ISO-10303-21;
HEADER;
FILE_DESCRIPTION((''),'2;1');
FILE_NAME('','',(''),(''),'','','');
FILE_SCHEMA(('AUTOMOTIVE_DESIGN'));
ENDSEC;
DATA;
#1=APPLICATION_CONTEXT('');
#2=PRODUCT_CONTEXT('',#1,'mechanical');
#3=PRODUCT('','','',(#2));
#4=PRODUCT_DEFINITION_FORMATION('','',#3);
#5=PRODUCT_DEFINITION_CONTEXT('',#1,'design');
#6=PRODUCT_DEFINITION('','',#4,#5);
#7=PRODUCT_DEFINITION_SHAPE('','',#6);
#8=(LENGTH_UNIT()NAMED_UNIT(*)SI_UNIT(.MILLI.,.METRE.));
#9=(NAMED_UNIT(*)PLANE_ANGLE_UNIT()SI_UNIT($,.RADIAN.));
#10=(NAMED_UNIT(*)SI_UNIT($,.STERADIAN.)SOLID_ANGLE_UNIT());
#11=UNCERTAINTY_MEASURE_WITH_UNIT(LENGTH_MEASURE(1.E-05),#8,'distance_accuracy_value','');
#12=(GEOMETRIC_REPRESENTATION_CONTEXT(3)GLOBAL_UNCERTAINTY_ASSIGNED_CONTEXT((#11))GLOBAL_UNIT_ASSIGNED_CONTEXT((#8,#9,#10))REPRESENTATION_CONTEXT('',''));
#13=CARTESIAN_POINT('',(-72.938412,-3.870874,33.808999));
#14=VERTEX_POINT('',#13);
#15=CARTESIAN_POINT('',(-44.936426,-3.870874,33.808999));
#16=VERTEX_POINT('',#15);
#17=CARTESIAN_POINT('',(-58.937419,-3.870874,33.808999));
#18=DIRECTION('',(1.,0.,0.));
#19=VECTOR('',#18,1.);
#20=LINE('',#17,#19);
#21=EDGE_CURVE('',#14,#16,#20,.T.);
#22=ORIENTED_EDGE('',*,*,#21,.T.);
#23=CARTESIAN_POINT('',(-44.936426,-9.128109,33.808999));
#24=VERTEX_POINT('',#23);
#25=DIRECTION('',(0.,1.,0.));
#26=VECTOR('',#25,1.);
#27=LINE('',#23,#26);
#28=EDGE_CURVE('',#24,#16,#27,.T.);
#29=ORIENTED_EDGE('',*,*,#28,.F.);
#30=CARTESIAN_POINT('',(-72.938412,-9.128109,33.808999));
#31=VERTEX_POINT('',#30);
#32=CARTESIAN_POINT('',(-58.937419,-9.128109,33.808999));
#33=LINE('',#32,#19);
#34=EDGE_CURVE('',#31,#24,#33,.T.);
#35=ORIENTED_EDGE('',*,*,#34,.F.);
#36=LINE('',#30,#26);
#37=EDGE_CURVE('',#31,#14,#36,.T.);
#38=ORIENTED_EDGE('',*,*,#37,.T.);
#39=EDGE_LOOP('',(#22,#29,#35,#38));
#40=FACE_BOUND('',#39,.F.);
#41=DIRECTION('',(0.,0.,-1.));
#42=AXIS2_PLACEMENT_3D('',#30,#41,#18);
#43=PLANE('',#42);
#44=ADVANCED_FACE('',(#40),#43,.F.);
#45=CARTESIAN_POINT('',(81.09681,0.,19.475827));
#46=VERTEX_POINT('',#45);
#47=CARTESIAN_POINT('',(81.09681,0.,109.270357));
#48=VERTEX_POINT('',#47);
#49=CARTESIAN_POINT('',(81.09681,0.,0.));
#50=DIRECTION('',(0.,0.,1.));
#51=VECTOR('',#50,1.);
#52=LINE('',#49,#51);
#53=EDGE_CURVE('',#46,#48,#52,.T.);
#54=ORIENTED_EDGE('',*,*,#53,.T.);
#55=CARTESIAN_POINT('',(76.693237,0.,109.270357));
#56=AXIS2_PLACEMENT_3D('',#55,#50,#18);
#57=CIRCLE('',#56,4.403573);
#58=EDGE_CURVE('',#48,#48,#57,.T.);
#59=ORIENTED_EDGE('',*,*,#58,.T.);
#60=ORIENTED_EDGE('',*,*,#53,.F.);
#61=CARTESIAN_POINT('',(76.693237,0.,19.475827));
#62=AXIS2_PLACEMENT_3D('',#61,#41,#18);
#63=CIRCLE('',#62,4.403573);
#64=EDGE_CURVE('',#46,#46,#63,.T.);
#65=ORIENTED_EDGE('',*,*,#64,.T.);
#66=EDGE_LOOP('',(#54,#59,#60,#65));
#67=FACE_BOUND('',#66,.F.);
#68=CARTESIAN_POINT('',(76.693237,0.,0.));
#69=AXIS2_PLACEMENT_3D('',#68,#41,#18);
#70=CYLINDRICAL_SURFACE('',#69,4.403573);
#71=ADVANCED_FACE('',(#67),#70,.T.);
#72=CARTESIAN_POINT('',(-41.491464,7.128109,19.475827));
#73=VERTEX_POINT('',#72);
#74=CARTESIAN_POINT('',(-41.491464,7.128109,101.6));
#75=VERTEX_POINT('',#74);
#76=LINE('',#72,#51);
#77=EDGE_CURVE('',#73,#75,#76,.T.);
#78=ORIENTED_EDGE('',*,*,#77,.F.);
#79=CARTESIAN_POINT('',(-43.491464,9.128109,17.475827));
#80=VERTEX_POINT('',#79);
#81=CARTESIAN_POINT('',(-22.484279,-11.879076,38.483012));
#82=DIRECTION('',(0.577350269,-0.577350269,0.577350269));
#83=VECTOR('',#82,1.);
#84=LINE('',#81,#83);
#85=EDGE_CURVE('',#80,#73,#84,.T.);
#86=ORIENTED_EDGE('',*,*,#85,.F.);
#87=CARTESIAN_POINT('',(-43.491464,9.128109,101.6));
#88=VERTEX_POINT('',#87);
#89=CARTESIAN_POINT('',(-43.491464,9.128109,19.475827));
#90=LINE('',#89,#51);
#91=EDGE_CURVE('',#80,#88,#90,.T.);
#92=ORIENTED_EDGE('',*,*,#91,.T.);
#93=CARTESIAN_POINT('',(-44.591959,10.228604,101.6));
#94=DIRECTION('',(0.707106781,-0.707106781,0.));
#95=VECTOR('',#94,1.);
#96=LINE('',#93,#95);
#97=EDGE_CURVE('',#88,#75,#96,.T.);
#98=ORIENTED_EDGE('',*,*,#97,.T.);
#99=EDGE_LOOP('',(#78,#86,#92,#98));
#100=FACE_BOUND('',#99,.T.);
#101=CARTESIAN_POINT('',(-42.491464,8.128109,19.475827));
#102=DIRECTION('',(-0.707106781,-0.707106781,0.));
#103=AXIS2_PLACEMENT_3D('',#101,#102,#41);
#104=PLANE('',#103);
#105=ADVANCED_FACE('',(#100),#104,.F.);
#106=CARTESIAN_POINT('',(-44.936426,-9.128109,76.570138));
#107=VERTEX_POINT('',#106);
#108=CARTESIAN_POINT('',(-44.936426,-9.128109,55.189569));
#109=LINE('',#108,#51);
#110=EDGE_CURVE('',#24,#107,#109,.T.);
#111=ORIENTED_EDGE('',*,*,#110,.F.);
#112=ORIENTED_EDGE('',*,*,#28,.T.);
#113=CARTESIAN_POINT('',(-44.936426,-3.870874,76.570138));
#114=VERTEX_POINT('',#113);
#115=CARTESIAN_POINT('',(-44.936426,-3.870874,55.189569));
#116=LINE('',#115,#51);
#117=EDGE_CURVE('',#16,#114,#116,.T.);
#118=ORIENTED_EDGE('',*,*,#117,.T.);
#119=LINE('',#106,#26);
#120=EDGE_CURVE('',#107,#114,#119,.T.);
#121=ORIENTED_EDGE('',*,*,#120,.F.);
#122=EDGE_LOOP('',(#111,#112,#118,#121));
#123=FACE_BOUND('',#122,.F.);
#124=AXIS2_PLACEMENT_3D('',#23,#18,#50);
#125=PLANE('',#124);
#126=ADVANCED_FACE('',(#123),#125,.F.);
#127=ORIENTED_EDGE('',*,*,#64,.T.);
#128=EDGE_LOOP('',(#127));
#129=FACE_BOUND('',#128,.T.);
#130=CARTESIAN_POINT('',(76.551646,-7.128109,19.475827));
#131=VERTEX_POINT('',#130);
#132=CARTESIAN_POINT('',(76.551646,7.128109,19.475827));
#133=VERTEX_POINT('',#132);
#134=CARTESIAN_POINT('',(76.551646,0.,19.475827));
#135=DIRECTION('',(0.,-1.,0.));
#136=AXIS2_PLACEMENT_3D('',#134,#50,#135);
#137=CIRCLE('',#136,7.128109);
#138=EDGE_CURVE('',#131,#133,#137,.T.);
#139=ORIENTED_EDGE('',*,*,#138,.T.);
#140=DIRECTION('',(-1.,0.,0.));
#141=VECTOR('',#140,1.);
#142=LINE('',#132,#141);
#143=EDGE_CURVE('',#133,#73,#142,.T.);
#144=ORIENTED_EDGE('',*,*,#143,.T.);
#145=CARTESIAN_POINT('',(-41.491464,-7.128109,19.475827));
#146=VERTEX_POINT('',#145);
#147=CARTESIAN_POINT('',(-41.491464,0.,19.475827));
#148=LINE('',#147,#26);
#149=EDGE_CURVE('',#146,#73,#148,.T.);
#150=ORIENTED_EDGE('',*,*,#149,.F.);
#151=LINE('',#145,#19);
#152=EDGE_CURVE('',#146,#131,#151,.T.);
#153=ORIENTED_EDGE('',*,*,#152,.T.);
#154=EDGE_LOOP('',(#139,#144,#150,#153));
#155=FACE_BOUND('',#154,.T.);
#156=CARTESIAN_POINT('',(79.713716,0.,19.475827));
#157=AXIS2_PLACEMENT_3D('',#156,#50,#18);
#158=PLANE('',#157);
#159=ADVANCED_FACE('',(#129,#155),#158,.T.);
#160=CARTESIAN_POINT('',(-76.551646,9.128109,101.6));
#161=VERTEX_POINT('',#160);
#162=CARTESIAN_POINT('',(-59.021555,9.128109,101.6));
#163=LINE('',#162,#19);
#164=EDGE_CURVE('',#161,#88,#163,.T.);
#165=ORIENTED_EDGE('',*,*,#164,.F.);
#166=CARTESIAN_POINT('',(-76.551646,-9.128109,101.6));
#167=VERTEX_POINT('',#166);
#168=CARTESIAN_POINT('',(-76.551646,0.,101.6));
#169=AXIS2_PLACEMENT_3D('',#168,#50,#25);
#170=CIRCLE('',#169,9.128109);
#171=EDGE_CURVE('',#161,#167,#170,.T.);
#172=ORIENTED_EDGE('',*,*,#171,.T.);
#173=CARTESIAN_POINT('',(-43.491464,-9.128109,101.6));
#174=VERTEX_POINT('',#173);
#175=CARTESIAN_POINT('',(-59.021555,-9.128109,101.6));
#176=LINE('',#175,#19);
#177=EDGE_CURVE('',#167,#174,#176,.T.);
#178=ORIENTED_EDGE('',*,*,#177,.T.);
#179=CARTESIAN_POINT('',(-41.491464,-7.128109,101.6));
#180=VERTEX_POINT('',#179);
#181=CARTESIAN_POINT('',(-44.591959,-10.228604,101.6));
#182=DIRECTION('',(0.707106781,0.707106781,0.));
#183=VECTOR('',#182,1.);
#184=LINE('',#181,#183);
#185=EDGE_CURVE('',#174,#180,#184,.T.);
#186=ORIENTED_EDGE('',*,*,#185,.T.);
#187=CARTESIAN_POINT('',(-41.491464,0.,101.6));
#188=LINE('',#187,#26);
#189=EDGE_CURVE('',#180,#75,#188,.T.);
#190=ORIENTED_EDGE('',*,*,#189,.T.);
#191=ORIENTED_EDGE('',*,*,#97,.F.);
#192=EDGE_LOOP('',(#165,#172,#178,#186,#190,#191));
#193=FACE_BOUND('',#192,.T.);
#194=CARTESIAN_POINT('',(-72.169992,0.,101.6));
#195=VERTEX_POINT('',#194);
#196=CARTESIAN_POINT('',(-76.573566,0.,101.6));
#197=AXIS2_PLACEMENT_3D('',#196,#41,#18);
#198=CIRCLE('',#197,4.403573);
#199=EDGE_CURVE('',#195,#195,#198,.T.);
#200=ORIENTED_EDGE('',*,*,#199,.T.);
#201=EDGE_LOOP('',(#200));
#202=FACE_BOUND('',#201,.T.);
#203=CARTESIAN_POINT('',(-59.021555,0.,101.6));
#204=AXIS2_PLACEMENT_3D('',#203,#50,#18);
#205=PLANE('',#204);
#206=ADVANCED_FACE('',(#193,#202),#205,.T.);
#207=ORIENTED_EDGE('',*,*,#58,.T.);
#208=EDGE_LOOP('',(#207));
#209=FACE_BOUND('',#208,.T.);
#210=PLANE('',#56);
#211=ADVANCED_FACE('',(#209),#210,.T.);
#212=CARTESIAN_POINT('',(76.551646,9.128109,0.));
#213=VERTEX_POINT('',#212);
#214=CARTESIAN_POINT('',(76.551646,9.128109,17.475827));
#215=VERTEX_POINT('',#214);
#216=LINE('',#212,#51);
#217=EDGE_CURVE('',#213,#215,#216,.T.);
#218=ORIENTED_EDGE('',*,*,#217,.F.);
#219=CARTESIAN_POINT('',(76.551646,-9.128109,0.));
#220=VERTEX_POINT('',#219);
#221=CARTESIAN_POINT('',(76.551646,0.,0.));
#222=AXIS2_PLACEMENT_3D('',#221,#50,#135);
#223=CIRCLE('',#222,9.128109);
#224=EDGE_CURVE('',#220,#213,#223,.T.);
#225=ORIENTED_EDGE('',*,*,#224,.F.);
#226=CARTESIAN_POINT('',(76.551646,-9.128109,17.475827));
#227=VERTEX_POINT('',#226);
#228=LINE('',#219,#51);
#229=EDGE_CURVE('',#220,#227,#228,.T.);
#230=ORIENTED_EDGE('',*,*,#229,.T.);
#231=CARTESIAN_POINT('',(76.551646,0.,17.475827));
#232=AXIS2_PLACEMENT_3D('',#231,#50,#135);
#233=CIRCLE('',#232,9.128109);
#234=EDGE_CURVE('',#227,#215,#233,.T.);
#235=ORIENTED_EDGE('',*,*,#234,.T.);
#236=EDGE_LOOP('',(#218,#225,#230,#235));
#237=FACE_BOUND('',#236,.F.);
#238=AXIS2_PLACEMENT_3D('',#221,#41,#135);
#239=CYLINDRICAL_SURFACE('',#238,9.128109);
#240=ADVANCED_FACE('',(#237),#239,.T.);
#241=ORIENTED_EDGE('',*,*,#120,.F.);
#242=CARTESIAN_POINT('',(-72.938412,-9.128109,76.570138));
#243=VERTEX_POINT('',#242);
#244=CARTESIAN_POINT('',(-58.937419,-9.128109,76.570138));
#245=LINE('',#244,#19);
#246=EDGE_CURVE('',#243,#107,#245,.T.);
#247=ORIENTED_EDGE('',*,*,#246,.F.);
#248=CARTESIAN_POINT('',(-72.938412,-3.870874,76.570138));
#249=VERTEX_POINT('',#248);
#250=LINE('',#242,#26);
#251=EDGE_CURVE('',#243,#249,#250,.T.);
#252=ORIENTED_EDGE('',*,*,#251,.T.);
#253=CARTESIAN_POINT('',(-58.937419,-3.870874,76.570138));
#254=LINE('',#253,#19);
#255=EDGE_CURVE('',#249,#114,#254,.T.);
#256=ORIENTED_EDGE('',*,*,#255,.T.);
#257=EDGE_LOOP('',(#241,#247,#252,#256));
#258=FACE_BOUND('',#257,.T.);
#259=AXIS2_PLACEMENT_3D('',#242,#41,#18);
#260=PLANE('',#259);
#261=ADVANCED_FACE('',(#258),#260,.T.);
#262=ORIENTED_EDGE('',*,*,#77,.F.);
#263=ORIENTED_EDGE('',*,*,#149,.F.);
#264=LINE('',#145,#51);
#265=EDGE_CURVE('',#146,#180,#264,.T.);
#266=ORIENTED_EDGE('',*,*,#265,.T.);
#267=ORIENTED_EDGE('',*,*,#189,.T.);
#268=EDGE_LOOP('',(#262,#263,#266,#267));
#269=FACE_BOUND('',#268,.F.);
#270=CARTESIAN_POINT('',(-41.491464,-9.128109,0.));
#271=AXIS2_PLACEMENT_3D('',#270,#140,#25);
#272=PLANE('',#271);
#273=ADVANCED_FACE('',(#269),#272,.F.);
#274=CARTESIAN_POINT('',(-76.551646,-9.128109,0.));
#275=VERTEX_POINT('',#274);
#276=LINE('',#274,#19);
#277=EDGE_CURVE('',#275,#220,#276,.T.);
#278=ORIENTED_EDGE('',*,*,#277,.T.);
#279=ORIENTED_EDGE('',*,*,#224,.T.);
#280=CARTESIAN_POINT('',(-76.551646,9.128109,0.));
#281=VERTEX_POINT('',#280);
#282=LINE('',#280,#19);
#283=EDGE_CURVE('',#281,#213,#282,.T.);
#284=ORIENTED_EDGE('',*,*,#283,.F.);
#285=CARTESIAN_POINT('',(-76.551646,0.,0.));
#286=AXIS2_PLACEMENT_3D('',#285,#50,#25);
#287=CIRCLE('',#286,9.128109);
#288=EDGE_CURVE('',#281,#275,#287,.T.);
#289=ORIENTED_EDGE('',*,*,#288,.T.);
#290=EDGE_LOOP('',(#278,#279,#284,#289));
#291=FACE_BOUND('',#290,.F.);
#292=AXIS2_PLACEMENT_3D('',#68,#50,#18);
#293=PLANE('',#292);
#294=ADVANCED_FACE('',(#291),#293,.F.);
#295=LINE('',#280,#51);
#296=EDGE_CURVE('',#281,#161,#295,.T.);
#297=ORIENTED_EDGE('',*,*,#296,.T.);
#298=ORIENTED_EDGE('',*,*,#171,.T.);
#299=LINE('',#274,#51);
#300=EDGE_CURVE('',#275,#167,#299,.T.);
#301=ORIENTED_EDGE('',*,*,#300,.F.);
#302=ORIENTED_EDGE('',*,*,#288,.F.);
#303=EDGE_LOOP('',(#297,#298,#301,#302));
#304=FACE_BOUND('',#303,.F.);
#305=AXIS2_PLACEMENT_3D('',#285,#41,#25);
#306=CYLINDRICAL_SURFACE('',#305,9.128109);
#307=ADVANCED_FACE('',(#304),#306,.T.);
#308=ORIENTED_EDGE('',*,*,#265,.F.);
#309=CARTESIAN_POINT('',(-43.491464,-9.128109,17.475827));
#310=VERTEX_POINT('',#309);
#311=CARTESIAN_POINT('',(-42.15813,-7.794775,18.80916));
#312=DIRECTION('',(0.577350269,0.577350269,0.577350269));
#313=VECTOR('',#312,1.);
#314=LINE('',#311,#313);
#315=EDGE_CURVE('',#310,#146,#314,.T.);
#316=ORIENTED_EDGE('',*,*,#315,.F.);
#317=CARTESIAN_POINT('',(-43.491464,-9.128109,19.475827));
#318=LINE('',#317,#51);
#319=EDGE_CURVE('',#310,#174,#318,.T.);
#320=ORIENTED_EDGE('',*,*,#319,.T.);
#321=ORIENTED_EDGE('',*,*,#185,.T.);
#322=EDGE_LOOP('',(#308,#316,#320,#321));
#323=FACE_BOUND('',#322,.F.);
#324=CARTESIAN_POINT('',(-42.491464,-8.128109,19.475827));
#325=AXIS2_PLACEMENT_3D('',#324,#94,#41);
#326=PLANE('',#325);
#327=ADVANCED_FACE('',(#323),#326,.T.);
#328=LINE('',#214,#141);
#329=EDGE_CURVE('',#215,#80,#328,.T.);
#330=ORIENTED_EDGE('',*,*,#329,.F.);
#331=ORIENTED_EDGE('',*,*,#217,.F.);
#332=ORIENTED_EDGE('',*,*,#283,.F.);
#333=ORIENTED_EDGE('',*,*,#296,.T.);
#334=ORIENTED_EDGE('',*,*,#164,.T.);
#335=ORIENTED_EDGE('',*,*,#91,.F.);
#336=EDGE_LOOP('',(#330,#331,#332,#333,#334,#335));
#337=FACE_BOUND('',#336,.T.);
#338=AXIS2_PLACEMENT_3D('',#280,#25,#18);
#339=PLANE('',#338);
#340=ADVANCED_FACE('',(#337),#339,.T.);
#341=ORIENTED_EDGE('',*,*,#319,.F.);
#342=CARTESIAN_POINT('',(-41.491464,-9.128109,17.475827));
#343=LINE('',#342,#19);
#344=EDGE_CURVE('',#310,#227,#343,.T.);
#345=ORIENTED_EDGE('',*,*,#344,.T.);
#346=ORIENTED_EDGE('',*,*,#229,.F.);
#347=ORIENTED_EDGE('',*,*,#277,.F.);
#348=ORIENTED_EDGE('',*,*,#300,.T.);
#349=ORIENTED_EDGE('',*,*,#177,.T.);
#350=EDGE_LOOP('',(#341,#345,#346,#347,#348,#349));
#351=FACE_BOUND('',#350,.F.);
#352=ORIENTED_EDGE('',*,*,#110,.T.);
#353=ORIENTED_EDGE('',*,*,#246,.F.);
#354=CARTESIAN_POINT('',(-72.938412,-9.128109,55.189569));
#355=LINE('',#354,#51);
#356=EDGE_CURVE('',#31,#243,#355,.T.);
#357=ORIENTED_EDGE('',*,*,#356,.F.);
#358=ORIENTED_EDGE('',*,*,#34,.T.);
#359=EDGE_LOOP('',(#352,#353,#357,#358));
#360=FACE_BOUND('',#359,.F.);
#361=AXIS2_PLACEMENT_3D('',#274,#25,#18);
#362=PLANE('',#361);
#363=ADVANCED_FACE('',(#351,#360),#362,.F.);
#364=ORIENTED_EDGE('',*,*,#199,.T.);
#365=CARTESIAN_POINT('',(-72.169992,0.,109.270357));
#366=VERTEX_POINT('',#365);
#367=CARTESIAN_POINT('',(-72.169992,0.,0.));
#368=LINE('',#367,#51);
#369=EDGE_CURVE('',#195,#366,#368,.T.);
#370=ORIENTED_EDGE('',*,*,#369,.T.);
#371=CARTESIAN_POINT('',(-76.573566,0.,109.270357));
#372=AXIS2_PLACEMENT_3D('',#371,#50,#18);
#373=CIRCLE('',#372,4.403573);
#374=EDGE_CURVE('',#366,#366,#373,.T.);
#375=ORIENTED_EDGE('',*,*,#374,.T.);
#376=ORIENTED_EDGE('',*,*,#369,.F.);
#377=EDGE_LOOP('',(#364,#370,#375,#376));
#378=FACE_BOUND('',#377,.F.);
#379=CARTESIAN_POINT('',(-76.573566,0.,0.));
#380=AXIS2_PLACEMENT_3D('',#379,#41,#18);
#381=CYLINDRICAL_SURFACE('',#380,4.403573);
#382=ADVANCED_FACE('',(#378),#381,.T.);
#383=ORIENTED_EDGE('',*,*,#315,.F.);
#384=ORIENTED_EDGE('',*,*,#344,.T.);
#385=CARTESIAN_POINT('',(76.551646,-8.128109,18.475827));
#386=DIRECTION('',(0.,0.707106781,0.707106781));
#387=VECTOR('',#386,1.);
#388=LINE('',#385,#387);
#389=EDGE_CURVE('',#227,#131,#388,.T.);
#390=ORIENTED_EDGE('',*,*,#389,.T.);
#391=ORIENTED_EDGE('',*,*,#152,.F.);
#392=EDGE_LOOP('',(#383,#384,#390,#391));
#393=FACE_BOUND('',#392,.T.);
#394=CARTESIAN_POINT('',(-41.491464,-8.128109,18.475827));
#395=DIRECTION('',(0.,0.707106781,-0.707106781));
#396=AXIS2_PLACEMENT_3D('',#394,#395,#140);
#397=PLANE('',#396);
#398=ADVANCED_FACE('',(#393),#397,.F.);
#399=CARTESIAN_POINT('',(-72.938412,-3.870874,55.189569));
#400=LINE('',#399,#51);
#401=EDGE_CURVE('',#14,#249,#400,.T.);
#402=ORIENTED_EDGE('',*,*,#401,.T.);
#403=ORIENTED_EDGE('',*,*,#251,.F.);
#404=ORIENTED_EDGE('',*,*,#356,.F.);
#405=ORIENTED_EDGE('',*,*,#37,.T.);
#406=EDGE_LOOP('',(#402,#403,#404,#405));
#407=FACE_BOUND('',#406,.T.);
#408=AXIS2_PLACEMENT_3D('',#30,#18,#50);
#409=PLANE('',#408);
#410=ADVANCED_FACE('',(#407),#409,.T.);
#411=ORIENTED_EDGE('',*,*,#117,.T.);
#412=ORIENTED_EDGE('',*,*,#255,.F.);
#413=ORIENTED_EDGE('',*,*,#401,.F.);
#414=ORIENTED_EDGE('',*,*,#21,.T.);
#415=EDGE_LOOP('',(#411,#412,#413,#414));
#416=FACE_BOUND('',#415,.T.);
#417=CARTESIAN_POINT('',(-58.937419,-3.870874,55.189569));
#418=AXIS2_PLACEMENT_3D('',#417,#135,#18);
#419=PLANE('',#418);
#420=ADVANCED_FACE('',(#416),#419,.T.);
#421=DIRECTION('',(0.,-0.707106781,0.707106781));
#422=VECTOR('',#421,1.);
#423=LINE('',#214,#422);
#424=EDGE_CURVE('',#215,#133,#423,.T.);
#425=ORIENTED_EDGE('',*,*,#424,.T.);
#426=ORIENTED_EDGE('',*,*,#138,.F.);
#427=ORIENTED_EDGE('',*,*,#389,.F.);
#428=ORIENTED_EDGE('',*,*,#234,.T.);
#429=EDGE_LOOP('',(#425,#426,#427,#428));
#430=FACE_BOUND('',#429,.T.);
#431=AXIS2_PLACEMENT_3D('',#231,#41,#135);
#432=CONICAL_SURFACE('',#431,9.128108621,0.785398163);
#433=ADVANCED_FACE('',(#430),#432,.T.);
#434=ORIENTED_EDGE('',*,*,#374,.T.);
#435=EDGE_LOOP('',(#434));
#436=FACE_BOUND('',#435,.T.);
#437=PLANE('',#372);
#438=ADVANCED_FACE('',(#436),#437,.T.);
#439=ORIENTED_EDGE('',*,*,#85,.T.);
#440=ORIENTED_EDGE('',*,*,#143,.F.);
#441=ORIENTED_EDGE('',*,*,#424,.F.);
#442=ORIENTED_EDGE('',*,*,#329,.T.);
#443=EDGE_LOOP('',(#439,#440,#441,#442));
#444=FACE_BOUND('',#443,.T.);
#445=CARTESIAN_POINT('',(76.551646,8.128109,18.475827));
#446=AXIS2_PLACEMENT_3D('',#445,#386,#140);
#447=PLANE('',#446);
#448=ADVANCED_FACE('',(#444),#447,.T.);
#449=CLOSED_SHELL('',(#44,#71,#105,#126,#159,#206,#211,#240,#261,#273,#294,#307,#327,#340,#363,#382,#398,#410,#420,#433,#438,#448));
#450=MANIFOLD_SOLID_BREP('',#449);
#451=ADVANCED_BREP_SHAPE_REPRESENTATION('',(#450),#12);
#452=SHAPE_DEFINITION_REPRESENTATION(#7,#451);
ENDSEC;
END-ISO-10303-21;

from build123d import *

# Parameters (mm, degrees)
F0_W     = 118.0431097746
F0_H     = 18.2562172413
F1_DEPTH = 19.4758269936
F0_W_2   = 35.0601822138
F2_DEPTH = 101.6
F3_W     = 28.001986444
F3_H     = 42.7611395717
F4_DEPTH = 5.2572349086
F8_R     = 4.4035732841
F9_DEPTH = 109.2703565955
F10_SIZE = 2


# Not quite as in the source:
# - a feature of the source that left no trace in its solid (it failed there, or was rolled back) is left out


with BuildPart() as f1:
    # F0 (on Top) → F1 (new body)
    with BuildSketch(Plane.XY):
        with BuildLine():
            Line((76.5516459942, 9.1281086206), (76.5516459942, -9.1281086206))
            ThreePointArc((76.5516459942, -9.1281086206), (85.6797546148, 0), (76.5516459942, 9.1281086206))
        make_face()
        with Locations((17.5300911069, 0)):
            Rectangle(F0_W, F0_H)
    extrude(amount=F1_DEPTH)

    # F0 (on Top) → F2 (join)
    with BuildSketch(Plane.XY):
        with Locations((-59.0215548873, 0)):
            Rectangle(F0_W_2, F0_H)
        with BuildLine():
            ThreePointArc((-76.5516459942, 9.1281086206), (-85.6797546148, 0), (-76.5516459942, -9.1281086206))
            Line((-76.5516459942, -9.1281086206), (-76.5516459942, 9.1281086206))
        make_face()
    extrude(amount=F2_DEPTH)

    # F3 (on face) → F4 (cut)
    with BuildSketch(Plane.XZ.offset(9.1281086206)):
        with Locations((-58.9374192059, 55.1895685494)):
            Rectangle(F3_W, F3_H)
    extrude(amount=-F4_DEPTH, mode=Mode.SUBTRACT)

    # F8 (on Top) → F9 (join)
    with BuildSketch(Plane.XY):
        with Locations((76.6932368279, 0)):
            Circle(F8_R)
        with Locations((-76.5735656023, 0)):
            Circle(F8_R)
    extrude(amount=F9_DEPTH)

    # F10
    f10_edges = [f1.edges().sort_by_distance(p)[0] for p in [
        (-41.491464, -9.128109, 60.537913),
        (17.530091, -9.128109, 19.475827),
        (-41.491464, 9.128109, 60.537913),
        (85.679755, 0, 19.475827),
        (17.530091, 9.128109, 19.475827),
    ]]
    chamfer(f10_edges, length=F10_SIZE)


solid = f1.part
